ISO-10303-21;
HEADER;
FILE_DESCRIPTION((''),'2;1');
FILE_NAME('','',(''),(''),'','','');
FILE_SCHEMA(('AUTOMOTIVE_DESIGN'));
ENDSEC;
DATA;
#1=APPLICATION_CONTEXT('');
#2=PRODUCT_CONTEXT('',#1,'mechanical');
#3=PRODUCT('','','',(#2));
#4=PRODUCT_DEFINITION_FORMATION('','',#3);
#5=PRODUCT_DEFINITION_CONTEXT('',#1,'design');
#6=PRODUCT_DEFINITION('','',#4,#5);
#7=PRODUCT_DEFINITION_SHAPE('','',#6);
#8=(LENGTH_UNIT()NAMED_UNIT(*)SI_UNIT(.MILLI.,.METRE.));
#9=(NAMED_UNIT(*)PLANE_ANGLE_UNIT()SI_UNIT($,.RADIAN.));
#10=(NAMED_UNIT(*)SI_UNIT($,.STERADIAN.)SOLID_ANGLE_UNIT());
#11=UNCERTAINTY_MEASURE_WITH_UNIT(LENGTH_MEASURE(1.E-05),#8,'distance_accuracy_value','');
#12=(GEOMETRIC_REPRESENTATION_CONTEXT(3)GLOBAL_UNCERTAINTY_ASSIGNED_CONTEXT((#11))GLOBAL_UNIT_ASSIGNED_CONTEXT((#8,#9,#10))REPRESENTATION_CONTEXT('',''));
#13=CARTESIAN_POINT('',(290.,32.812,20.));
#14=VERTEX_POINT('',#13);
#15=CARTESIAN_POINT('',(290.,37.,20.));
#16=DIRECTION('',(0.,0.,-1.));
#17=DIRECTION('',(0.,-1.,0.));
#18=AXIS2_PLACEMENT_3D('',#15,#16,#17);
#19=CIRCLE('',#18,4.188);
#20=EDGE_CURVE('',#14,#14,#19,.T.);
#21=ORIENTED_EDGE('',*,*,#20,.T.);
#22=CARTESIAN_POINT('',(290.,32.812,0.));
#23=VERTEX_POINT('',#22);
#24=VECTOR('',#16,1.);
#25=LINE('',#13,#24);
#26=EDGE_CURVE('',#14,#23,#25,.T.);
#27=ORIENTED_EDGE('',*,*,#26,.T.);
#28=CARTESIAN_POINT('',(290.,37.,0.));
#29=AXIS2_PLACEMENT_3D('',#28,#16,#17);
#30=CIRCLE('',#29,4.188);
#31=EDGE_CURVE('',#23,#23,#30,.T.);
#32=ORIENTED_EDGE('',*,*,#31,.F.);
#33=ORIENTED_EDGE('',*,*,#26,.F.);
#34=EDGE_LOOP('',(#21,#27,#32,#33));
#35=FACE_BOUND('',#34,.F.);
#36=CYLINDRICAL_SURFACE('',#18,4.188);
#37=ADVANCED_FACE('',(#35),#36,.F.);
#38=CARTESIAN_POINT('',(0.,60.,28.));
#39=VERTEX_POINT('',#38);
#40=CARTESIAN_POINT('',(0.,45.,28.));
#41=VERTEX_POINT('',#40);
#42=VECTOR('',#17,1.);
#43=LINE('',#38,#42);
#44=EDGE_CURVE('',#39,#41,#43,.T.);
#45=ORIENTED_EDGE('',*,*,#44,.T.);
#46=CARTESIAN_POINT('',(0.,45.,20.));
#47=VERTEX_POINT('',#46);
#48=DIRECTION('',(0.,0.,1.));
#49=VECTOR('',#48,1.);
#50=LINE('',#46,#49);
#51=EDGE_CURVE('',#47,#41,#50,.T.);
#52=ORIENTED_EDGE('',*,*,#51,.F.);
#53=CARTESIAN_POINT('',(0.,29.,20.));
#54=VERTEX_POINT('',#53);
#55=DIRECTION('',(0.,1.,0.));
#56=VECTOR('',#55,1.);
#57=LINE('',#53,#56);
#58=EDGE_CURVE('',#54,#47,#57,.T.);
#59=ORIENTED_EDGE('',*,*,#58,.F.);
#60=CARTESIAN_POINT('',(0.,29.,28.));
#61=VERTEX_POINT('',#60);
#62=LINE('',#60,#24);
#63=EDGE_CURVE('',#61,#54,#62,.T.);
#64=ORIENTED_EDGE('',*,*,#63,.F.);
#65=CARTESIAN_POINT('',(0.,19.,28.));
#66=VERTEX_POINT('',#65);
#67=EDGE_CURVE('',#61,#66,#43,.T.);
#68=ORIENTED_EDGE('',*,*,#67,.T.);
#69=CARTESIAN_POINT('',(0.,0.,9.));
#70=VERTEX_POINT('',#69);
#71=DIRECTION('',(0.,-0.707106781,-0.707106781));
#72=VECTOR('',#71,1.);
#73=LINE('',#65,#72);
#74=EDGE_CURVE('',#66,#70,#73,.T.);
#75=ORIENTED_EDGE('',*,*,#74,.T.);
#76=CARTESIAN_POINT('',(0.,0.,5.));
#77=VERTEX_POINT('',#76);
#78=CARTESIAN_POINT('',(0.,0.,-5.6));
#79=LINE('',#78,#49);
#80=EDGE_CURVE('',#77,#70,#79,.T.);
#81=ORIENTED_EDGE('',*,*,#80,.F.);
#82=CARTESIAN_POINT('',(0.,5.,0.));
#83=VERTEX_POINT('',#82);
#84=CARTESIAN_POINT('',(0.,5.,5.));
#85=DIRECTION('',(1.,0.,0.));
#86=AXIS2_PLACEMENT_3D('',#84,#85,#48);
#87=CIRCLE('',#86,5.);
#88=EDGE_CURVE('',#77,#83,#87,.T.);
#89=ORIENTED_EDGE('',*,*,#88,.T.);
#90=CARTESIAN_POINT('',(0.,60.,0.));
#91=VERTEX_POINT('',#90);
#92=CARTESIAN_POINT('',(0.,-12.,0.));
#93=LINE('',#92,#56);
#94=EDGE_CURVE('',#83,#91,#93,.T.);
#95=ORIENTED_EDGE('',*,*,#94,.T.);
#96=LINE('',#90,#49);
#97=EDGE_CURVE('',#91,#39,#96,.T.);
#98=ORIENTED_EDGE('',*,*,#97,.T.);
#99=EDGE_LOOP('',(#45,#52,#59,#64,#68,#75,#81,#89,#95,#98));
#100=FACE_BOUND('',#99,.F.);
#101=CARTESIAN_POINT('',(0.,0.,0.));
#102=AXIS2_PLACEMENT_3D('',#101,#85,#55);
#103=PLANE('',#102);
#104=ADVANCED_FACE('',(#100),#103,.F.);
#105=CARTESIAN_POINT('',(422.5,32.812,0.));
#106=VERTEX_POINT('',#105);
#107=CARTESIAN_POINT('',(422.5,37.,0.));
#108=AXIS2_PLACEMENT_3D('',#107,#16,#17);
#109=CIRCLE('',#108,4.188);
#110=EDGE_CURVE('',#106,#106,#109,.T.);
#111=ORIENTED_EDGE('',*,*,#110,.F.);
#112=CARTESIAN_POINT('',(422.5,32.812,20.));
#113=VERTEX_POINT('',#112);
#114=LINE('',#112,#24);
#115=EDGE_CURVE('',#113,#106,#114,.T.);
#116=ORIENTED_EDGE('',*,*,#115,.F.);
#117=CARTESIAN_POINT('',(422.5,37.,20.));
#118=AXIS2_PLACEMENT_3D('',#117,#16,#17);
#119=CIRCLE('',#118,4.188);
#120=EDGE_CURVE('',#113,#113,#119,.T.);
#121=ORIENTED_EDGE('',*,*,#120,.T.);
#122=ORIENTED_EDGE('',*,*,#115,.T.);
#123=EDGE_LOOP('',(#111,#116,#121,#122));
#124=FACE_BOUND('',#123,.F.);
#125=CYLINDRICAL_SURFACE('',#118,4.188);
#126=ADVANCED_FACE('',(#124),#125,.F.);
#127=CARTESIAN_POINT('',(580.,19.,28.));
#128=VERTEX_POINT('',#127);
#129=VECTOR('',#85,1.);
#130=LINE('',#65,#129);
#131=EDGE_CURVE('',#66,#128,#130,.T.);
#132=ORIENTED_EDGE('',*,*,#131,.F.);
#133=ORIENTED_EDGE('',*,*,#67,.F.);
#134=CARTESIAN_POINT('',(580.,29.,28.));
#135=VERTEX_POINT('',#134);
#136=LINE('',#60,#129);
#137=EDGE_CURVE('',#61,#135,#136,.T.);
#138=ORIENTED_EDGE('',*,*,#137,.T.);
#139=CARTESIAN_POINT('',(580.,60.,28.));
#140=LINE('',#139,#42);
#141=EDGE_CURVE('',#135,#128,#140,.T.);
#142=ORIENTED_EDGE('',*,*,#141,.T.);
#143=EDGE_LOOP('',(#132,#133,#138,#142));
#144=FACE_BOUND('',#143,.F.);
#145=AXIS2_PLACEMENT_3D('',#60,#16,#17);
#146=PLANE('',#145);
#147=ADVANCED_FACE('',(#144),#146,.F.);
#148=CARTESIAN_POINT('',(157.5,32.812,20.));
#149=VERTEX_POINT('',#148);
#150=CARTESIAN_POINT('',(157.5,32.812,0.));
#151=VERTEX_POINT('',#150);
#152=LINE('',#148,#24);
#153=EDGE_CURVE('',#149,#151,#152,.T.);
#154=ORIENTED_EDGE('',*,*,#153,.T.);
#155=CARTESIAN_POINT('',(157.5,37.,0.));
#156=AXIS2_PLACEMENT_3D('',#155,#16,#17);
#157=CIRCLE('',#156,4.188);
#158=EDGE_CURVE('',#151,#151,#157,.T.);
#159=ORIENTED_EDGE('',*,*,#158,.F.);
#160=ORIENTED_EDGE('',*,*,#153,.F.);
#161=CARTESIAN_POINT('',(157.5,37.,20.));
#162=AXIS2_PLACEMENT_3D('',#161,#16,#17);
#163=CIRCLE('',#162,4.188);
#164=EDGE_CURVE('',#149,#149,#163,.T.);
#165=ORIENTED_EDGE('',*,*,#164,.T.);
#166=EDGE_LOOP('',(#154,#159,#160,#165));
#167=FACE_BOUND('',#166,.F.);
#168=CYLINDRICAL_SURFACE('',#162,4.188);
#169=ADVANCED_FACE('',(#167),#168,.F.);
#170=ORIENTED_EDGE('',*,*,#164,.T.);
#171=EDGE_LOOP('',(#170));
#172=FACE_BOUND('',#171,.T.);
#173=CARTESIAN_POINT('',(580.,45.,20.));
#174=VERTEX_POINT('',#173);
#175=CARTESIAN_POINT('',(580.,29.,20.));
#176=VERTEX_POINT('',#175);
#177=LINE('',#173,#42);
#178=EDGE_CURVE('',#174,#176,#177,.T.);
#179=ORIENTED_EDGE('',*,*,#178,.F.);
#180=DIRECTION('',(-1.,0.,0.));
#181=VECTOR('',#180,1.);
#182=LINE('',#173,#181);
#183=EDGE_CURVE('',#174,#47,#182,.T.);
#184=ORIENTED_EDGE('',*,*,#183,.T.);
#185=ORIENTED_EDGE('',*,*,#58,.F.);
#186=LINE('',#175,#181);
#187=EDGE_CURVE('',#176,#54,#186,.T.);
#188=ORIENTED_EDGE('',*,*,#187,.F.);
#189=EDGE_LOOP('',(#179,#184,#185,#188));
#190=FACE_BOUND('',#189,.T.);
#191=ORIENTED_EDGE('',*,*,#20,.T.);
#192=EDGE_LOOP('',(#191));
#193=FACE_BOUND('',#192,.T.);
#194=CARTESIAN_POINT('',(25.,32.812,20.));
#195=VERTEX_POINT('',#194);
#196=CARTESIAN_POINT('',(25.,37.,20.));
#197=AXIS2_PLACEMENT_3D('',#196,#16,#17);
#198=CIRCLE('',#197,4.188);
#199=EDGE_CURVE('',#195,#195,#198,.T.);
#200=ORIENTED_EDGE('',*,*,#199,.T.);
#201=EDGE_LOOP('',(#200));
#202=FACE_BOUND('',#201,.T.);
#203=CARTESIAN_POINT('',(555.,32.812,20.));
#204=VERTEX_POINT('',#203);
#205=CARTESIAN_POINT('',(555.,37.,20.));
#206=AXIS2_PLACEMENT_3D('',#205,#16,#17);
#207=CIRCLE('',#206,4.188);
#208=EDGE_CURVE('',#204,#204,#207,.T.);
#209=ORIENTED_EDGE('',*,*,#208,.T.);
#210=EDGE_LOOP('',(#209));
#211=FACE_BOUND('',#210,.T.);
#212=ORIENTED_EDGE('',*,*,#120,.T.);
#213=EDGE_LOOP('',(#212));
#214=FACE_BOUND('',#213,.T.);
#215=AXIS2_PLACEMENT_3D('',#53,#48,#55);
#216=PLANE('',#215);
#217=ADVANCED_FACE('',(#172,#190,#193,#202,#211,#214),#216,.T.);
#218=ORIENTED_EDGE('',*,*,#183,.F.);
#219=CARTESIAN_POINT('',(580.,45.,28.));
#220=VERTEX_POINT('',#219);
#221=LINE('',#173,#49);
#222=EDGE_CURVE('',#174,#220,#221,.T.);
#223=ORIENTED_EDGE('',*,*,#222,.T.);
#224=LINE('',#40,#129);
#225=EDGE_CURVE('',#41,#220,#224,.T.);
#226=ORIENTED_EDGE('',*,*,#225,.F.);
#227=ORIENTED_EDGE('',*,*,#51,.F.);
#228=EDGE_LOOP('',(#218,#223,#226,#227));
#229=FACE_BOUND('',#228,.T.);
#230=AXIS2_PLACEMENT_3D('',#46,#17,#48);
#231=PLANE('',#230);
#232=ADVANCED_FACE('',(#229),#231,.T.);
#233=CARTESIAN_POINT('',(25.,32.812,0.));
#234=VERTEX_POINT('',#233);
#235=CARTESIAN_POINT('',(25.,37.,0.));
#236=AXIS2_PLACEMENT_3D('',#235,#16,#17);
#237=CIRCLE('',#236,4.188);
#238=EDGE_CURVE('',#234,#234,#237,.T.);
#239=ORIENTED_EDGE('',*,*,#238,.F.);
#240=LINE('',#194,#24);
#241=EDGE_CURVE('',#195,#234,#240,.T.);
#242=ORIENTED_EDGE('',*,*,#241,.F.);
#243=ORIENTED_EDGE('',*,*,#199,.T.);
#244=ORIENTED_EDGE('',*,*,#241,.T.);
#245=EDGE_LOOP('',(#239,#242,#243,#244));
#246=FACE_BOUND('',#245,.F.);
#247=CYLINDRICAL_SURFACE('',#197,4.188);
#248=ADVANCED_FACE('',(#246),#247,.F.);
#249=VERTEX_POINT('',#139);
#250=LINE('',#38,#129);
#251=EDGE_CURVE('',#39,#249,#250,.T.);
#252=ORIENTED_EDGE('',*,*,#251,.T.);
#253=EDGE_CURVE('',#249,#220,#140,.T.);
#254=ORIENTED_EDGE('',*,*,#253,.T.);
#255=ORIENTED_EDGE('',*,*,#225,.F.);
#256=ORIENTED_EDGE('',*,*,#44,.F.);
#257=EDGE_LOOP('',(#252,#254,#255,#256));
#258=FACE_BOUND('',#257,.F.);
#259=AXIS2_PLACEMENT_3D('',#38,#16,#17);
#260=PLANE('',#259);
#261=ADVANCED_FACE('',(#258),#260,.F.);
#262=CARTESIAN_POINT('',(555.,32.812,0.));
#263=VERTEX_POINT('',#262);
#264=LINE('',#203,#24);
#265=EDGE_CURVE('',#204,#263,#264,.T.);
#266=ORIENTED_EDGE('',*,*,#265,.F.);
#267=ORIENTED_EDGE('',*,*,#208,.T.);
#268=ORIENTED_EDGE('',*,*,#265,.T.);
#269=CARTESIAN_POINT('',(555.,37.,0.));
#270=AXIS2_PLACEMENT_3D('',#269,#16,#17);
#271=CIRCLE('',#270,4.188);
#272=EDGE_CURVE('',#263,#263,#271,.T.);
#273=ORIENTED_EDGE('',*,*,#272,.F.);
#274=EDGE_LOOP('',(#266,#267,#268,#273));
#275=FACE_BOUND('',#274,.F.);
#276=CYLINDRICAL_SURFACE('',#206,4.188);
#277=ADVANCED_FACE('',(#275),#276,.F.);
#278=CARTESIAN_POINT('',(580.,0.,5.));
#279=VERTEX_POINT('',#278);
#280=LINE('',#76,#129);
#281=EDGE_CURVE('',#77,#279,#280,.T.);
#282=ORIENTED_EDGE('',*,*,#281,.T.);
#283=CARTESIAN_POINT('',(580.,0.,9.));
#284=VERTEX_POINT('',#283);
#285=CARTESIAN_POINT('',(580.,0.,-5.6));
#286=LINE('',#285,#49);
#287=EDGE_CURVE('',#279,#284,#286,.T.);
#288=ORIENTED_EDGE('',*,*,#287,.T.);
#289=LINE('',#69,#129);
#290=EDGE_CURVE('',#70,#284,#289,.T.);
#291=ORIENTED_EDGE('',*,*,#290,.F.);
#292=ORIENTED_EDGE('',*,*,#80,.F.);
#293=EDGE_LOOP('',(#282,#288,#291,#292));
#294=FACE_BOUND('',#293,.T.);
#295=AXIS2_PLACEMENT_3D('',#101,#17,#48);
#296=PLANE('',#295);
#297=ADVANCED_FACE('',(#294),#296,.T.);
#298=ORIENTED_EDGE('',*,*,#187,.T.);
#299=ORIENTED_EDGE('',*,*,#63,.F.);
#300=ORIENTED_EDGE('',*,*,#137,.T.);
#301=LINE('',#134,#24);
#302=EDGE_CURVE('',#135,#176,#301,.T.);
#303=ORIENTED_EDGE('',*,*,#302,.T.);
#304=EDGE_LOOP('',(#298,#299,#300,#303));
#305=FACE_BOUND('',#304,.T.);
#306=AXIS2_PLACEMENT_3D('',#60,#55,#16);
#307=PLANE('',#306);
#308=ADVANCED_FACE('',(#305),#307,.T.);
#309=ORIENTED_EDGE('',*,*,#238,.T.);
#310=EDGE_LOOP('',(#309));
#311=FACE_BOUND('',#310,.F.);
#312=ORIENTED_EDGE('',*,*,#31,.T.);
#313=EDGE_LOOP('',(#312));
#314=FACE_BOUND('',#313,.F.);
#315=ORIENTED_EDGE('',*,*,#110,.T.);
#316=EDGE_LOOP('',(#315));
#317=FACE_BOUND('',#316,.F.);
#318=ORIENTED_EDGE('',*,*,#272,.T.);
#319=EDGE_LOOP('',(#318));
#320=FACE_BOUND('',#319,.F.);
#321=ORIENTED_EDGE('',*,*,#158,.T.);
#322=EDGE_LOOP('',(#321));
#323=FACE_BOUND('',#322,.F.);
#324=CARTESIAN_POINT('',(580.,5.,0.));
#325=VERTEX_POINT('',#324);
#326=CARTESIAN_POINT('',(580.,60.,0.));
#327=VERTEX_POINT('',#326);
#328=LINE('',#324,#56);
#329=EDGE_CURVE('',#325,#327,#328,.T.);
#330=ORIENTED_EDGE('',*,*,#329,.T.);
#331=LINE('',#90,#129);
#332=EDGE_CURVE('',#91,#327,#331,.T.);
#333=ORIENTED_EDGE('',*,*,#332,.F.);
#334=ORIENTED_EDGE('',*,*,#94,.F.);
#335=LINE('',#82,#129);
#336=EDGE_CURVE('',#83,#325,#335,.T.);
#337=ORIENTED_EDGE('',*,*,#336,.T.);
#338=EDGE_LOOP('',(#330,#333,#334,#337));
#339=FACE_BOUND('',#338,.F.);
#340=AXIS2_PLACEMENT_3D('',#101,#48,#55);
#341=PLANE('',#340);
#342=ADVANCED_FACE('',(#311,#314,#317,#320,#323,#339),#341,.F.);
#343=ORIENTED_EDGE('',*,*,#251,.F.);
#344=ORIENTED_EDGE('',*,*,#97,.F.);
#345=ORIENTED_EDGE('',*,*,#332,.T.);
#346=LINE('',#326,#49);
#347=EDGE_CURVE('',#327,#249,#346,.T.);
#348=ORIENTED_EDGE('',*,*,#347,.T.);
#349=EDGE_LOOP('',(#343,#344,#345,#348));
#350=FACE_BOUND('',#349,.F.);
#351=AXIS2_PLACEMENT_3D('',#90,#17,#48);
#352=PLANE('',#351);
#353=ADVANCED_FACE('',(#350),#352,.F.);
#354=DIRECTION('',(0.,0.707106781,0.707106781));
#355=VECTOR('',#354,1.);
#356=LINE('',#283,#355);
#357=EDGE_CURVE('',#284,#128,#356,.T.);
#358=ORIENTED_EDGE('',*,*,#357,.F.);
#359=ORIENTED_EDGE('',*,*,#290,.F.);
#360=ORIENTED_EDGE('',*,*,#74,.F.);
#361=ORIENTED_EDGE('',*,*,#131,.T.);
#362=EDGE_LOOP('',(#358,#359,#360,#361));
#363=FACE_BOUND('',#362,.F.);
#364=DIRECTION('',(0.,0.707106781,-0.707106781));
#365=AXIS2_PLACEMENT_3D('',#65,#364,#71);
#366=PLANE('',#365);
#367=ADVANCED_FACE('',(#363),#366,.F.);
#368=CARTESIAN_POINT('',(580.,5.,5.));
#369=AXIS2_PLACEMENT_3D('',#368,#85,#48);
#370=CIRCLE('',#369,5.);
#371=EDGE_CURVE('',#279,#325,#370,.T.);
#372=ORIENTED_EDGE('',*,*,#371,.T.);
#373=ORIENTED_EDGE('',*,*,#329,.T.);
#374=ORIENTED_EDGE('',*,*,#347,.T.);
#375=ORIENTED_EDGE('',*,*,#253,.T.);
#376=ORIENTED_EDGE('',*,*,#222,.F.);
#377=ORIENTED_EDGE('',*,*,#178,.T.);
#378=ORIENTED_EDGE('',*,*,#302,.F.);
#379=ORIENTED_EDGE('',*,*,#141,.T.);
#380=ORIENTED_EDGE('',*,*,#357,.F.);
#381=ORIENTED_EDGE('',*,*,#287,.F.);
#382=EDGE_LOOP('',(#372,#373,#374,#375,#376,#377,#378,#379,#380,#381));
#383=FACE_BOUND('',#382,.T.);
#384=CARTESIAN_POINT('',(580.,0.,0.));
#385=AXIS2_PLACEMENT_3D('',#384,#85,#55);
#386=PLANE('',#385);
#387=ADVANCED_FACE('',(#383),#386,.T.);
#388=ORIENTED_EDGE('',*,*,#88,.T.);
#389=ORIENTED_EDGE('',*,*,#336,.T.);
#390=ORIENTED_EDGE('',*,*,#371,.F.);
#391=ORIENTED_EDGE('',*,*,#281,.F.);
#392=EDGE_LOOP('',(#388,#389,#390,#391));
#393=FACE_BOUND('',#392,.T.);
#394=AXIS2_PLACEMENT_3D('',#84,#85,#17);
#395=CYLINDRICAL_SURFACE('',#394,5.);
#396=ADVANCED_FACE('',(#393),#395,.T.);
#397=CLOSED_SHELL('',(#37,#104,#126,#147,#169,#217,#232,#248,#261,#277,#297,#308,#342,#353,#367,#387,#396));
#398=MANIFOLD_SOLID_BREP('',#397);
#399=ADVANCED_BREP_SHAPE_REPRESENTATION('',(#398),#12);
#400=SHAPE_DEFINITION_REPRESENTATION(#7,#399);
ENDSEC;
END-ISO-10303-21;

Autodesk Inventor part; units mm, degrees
ref_plane "YZ Plane" through (0, 0, 0) normal (1, 0, 0) x (0, 1, 0)
ref_plane "XZ Plane" through (0, 0, 0) normal (0, 1, 0) x (-1, 0, 0)
ref_plane "XY Plane" through (0, 0, 0) normal (0, 0, 1) x (1, 0, 0)
sketch "草圖1" plane through (0, 0, 0) normal (1, 0, 0) x (0, 1, 0)
  line L0 (-12, 0) -> (72, 0) projected
  line L1 (0, -5.6) -> (0, 33.6) projected
  line L2 (0, 0) -> (60, 0)
  line L3 (60, 0) -> (60, 28)
  line L4 (0, 9) -> (0, 0)
  line L5 (45, 28) -> (29, 28)
  line L6 (29, 28) -> (29, 20)
  line L7 (29, 20) -> (45, 20)
  line L8 (45, 20) -> (45, 28)
  line L9 (19, 28) -> (0, 9)
  line L10 (60, 28) -> (19, 28)
  dimension "d1" = 28
  dimension "d2" = 15
  dimension "d3" = 8
  dimension "d4" = 16
  dimension "d6" = 10
extrude "擠出1" add sketch "草圖1" along normal blind 580 contours L1 L9 L10 L6 L7 L8 L3 L0
fillet "圓角1" radius 5 1 edges at (290, 0, 0)
sketch "草圖2" plane through (0, 29, 20) normal (0, 0, 1) x (1, 0, 0)
  line L0 (-116, -29) -> (696, -29) projected
  line L1 (0, -41) -> (0, 43) projected
  line L2 (0, 31) -> (580, 31) projected
  line L3 (0, 8) -> (580, 8)
  point P0 (0, -29)
  point P1 (555, 8)
  point P2 (422.5, 8)
  point P3 (290, 8)
  point P4 (157.5, 8)
  point P5 (25, 8)
  point P6 (580, 0)
  dimension "d10" = 23
  dimension "d11" = 25
  dimension "d12" = 132.5
  dimension "d13" = 132.5
  dimension "d14" = 132.5
  dimension "d15" = 132.5
hole "孔1" at (555, 37, 20) at (422.5, 37, 20) at (290, 37, 20) at (157.5, 37, 20) at (25, 37, 20) at (580, 29, 20) direction (0, 0, -1) diameter 8.376 end through all thread size "M10x1.5" class "6H" standard "ISO Metric profile"
delete faces "刪除面1" heal yes whole lump no faces at (575.812, 29, 6.6667)
properties part number "exercise3-13"
